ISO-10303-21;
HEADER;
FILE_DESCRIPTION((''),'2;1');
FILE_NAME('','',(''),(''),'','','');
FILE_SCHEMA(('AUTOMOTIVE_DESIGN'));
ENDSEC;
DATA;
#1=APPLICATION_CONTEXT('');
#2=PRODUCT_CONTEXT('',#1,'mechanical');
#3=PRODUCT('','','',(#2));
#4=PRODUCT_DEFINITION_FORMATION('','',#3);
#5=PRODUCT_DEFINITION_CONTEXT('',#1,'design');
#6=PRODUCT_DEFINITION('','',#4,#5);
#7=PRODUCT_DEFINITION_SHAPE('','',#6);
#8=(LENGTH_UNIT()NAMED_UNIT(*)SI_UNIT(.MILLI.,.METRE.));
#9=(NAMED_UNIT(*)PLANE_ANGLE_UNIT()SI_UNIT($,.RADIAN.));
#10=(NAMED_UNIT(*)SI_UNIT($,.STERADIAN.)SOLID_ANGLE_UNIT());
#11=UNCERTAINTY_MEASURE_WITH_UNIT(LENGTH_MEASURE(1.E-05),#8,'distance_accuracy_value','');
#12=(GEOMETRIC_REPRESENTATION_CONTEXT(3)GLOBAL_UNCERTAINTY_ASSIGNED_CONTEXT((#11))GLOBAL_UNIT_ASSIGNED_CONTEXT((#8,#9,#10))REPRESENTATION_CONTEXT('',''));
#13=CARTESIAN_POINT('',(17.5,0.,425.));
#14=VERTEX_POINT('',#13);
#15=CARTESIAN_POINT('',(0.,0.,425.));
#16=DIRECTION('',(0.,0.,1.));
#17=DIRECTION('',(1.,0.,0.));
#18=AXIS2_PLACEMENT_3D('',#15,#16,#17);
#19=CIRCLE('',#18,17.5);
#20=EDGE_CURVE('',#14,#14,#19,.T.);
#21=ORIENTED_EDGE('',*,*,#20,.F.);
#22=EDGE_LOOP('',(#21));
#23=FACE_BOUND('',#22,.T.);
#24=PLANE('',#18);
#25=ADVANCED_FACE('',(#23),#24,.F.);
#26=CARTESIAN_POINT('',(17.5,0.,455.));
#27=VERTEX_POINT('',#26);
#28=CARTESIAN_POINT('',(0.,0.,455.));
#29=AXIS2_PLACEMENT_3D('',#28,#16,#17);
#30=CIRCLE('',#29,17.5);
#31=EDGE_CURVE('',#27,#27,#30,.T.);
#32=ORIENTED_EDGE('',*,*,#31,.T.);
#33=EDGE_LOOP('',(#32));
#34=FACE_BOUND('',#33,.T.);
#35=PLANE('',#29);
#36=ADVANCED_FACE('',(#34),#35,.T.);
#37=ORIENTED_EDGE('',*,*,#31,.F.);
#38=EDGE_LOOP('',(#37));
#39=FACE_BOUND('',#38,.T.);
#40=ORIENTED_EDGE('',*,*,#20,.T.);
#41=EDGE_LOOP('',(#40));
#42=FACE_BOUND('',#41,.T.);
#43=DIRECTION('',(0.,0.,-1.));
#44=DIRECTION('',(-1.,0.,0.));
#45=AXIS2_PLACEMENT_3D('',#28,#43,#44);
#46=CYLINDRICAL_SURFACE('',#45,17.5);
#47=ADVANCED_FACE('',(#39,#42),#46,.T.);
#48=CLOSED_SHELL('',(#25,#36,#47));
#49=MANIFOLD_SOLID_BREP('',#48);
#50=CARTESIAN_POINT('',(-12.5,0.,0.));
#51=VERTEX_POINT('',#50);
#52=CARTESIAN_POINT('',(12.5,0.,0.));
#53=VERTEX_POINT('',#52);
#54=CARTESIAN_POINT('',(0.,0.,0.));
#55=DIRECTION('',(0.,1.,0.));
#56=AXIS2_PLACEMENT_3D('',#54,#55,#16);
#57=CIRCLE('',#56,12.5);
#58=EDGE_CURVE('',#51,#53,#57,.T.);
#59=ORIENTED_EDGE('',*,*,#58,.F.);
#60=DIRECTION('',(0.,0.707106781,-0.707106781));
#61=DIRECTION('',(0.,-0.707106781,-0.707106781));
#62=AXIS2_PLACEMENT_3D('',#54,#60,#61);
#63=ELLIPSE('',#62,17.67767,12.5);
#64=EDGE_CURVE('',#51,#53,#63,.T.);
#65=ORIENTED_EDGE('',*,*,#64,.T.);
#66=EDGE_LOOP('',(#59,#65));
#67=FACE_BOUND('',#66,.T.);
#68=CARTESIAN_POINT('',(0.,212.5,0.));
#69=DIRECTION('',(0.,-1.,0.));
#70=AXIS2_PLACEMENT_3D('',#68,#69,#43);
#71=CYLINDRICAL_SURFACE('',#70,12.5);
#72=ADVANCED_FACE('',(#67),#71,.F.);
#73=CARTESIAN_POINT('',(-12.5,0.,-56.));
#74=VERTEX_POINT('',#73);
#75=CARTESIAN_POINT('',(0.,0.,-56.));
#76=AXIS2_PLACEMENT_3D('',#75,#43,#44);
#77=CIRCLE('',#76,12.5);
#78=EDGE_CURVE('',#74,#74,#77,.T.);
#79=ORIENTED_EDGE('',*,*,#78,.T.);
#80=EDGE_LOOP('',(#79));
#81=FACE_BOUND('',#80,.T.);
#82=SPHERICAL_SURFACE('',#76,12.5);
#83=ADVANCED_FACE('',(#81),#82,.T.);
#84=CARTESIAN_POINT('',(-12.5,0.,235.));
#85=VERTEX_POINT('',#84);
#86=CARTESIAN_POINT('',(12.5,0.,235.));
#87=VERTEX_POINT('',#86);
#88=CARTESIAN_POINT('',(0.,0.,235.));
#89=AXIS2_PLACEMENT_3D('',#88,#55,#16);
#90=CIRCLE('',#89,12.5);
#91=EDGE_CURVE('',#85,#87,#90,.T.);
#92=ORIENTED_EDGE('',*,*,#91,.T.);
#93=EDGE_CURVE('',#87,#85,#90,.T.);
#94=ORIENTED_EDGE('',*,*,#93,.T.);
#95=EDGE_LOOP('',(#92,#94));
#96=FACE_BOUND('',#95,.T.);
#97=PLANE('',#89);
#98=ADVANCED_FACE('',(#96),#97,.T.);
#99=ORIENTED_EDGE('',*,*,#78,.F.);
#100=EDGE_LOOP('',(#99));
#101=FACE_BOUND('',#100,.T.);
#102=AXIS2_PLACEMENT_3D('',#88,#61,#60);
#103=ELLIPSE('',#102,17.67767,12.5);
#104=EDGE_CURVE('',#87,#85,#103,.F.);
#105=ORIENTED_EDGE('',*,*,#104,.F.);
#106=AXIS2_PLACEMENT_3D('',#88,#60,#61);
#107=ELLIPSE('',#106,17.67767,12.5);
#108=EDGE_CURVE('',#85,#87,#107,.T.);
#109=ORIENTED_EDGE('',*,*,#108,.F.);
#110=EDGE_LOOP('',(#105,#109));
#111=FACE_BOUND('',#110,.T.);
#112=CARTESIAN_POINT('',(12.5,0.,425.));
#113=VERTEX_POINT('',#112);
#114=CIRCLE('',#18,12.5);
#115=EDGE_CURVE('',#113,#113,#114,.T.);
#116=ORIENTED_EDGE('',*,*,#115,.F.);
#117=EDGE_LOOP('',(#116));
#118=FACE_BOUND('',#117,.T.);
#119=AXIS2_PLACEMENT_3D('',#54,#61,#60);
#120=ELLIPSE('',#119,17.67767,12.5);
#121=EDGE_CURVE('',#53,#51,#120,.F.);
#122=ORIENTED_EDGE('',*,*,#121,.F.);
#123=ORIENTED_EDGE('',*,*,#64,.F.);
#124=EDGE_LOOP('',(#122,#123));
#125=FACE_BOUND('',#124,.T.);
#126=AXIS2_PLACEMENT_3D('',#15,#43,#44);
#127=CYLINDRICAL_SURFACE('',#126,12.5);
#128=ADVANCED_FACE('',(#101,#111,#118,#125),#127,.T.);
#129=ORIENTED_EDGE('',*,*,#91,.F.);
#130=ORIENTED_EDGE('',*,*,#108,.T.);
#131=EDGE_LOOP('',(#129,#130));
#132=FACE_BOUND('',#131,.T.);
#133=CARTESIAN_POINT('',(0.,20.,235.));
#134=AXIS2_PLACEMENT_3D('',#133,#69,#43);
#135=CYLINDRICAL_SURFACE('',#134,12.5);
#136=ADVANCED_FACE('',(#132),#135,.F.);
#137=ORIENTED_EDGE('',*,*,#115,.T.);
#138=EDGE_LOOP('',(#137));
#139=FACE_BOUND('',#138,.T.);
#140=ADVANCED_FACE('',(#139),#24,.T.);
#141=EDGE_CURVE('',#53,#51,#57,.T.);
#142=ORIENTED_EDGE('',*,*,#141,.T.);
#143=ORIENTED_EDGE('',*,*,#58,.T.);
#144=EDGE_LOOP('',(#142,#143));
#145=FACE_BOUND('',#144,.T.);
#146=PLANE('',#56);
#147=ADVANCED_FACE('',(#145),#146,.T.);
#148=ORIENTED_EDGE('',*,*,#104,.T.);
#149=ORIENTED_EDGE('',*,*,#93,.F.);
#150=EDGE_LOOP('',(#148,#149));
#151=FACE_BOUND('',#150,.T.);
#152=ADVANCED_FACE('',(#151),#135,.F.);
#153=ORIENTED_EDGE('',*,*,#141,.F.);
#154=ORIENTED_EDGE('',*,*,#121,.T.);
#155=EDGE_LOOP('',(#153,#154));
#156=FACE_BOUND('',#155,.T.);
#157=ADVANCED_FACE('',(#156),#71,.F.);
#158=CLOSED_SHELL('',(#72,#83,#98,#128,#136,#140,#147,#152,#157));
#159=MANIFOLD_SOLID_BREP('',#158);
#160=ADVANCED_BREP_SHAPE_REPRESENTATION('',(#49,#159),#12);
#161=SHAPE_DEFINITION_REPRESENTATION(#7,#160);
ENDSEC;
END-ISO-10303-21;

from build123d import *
from build123d.topology import SkipClean

# Parameters (mm, degrees)
SKETCH1_R           = 12.5
BOSS_EXTRUDE1_DEPTH = 425
SKETCH3_R           = 17.5
BOSS_EXTRUDE2_DEPTH = 30
SKETCH7_R           = 12.5
CUT_EXTRUDE1_DEPTH  = 20
BOSS_EXTRUDE4_START = 212.5
SKETCH10_R          = 12.5
BOSS_EXTRUDE4_DEPTH = 212.5
SKETCH12_R          = 12.5
CUT_EXTRUDE2_DEPTH  = 212.5
SKETCH14_R          = 12.5
CUT_EXTRUDE3_DEPTH  = 106.25
SKETCH16_R          = 12.5
CUT_EXTRUDE4_DEPTH  = 50.25


with BuildPart() as part:
    # Sketch1 → Boss-Extrude1 (new body)
    with BuildSketch(Plane.XY):
        Circle(SKETCH1_R)
    extrude(amount=BOSS_EXTRUDE1_DEPTH)

    # Sketch7 → Cut-Extrude1 (cut)
    with BuildSketch(Plane(origin=(0, 0, 0), x_dir=(1, 0, 0), z_dir=(0, 1, 0))):
        with Locations((0, -235)):
            Circle(SKETCH7_R)
    extrude(amount=CUT_EXTRUDE1_DEPTH, mode=Mode.SUBTRACT)

    # Sketch10 → Boss-Extrude4 (add)
    with BuildSketch(Plane(origin=(0, 0, 0), x_dir=(-1, 0, 0), z_dir=(0, 0, -1)).offset(BOSS_EXTRUDE4_START)):
        Circle(SKETCH10_R)
    extrude(amount=-BOSS_EXTRUDE4_DEPTH)

    # Sketch12 → Cut-Extrude2 (cut)
    with BuildSketch(Plane(origin=(0, 0, 0), x_dir=(1, 0, 0), z_dir=(0, 1, 0))):
        Circle(SKETCH12_R)
    extrude(amount=CUT_EXTRUDE2_DEPTH, mode=Mode.SUBTRACT)

    # Sketch14 → Cut-Extrude3 (cut)
    with BuildSketch(Plane(origin=(0, 0, -212.5), x_dir=(-1, 0, 0), z_dir=(0, 0, -1))):
        Circle(SKETCH14_R)
    extrude(amount=-CUT_EXTRUDE3_DEPTH, mode=Mode.SUBTRACT)

    # Sketch16 → Cut-Extrude4 (cut)
    with BuildSketch(Plane(origin=(0, 0, -106.25), x_dir=(-1, 0, 0), z_dir=(0, 0, -1))):
        Circle(SKETCH16_R)
    extrude(amount=-CUT_EXTRUDE4_DEPTH, mode=Mode.SUBTRACT)

    # Sketch17 → Revolve3 (revolve)
    with SkipClean():  # the faces are left unmerged after this step: merging them gives an invalid solid
        with BuildSketch(Plane(origin=(0, 0, 0), x_dir=(0, 0, -1), z_dir=(1, 0, 0))):
            with BuildLine():
                Line((56, 12.5), (56, -12.5))
                ThreePointArc((56, -12.5), (68.5, 0), (56, 12.5))
            make_face()
        revolve(axis=Axis((0, 12.5, -56), (0, -1, 0)))


with BuildPart() as body_2:
    # Sketch3 → Boss-Extrude2 (new body)
    with BuildSketch(Plane.XY.offset(425)):
        Circle(SKETCH3_R)
    extrude(amount=BOSS_EXTRUDE2_DEPTH)


solid = Compound([part.part, body_2.part])
